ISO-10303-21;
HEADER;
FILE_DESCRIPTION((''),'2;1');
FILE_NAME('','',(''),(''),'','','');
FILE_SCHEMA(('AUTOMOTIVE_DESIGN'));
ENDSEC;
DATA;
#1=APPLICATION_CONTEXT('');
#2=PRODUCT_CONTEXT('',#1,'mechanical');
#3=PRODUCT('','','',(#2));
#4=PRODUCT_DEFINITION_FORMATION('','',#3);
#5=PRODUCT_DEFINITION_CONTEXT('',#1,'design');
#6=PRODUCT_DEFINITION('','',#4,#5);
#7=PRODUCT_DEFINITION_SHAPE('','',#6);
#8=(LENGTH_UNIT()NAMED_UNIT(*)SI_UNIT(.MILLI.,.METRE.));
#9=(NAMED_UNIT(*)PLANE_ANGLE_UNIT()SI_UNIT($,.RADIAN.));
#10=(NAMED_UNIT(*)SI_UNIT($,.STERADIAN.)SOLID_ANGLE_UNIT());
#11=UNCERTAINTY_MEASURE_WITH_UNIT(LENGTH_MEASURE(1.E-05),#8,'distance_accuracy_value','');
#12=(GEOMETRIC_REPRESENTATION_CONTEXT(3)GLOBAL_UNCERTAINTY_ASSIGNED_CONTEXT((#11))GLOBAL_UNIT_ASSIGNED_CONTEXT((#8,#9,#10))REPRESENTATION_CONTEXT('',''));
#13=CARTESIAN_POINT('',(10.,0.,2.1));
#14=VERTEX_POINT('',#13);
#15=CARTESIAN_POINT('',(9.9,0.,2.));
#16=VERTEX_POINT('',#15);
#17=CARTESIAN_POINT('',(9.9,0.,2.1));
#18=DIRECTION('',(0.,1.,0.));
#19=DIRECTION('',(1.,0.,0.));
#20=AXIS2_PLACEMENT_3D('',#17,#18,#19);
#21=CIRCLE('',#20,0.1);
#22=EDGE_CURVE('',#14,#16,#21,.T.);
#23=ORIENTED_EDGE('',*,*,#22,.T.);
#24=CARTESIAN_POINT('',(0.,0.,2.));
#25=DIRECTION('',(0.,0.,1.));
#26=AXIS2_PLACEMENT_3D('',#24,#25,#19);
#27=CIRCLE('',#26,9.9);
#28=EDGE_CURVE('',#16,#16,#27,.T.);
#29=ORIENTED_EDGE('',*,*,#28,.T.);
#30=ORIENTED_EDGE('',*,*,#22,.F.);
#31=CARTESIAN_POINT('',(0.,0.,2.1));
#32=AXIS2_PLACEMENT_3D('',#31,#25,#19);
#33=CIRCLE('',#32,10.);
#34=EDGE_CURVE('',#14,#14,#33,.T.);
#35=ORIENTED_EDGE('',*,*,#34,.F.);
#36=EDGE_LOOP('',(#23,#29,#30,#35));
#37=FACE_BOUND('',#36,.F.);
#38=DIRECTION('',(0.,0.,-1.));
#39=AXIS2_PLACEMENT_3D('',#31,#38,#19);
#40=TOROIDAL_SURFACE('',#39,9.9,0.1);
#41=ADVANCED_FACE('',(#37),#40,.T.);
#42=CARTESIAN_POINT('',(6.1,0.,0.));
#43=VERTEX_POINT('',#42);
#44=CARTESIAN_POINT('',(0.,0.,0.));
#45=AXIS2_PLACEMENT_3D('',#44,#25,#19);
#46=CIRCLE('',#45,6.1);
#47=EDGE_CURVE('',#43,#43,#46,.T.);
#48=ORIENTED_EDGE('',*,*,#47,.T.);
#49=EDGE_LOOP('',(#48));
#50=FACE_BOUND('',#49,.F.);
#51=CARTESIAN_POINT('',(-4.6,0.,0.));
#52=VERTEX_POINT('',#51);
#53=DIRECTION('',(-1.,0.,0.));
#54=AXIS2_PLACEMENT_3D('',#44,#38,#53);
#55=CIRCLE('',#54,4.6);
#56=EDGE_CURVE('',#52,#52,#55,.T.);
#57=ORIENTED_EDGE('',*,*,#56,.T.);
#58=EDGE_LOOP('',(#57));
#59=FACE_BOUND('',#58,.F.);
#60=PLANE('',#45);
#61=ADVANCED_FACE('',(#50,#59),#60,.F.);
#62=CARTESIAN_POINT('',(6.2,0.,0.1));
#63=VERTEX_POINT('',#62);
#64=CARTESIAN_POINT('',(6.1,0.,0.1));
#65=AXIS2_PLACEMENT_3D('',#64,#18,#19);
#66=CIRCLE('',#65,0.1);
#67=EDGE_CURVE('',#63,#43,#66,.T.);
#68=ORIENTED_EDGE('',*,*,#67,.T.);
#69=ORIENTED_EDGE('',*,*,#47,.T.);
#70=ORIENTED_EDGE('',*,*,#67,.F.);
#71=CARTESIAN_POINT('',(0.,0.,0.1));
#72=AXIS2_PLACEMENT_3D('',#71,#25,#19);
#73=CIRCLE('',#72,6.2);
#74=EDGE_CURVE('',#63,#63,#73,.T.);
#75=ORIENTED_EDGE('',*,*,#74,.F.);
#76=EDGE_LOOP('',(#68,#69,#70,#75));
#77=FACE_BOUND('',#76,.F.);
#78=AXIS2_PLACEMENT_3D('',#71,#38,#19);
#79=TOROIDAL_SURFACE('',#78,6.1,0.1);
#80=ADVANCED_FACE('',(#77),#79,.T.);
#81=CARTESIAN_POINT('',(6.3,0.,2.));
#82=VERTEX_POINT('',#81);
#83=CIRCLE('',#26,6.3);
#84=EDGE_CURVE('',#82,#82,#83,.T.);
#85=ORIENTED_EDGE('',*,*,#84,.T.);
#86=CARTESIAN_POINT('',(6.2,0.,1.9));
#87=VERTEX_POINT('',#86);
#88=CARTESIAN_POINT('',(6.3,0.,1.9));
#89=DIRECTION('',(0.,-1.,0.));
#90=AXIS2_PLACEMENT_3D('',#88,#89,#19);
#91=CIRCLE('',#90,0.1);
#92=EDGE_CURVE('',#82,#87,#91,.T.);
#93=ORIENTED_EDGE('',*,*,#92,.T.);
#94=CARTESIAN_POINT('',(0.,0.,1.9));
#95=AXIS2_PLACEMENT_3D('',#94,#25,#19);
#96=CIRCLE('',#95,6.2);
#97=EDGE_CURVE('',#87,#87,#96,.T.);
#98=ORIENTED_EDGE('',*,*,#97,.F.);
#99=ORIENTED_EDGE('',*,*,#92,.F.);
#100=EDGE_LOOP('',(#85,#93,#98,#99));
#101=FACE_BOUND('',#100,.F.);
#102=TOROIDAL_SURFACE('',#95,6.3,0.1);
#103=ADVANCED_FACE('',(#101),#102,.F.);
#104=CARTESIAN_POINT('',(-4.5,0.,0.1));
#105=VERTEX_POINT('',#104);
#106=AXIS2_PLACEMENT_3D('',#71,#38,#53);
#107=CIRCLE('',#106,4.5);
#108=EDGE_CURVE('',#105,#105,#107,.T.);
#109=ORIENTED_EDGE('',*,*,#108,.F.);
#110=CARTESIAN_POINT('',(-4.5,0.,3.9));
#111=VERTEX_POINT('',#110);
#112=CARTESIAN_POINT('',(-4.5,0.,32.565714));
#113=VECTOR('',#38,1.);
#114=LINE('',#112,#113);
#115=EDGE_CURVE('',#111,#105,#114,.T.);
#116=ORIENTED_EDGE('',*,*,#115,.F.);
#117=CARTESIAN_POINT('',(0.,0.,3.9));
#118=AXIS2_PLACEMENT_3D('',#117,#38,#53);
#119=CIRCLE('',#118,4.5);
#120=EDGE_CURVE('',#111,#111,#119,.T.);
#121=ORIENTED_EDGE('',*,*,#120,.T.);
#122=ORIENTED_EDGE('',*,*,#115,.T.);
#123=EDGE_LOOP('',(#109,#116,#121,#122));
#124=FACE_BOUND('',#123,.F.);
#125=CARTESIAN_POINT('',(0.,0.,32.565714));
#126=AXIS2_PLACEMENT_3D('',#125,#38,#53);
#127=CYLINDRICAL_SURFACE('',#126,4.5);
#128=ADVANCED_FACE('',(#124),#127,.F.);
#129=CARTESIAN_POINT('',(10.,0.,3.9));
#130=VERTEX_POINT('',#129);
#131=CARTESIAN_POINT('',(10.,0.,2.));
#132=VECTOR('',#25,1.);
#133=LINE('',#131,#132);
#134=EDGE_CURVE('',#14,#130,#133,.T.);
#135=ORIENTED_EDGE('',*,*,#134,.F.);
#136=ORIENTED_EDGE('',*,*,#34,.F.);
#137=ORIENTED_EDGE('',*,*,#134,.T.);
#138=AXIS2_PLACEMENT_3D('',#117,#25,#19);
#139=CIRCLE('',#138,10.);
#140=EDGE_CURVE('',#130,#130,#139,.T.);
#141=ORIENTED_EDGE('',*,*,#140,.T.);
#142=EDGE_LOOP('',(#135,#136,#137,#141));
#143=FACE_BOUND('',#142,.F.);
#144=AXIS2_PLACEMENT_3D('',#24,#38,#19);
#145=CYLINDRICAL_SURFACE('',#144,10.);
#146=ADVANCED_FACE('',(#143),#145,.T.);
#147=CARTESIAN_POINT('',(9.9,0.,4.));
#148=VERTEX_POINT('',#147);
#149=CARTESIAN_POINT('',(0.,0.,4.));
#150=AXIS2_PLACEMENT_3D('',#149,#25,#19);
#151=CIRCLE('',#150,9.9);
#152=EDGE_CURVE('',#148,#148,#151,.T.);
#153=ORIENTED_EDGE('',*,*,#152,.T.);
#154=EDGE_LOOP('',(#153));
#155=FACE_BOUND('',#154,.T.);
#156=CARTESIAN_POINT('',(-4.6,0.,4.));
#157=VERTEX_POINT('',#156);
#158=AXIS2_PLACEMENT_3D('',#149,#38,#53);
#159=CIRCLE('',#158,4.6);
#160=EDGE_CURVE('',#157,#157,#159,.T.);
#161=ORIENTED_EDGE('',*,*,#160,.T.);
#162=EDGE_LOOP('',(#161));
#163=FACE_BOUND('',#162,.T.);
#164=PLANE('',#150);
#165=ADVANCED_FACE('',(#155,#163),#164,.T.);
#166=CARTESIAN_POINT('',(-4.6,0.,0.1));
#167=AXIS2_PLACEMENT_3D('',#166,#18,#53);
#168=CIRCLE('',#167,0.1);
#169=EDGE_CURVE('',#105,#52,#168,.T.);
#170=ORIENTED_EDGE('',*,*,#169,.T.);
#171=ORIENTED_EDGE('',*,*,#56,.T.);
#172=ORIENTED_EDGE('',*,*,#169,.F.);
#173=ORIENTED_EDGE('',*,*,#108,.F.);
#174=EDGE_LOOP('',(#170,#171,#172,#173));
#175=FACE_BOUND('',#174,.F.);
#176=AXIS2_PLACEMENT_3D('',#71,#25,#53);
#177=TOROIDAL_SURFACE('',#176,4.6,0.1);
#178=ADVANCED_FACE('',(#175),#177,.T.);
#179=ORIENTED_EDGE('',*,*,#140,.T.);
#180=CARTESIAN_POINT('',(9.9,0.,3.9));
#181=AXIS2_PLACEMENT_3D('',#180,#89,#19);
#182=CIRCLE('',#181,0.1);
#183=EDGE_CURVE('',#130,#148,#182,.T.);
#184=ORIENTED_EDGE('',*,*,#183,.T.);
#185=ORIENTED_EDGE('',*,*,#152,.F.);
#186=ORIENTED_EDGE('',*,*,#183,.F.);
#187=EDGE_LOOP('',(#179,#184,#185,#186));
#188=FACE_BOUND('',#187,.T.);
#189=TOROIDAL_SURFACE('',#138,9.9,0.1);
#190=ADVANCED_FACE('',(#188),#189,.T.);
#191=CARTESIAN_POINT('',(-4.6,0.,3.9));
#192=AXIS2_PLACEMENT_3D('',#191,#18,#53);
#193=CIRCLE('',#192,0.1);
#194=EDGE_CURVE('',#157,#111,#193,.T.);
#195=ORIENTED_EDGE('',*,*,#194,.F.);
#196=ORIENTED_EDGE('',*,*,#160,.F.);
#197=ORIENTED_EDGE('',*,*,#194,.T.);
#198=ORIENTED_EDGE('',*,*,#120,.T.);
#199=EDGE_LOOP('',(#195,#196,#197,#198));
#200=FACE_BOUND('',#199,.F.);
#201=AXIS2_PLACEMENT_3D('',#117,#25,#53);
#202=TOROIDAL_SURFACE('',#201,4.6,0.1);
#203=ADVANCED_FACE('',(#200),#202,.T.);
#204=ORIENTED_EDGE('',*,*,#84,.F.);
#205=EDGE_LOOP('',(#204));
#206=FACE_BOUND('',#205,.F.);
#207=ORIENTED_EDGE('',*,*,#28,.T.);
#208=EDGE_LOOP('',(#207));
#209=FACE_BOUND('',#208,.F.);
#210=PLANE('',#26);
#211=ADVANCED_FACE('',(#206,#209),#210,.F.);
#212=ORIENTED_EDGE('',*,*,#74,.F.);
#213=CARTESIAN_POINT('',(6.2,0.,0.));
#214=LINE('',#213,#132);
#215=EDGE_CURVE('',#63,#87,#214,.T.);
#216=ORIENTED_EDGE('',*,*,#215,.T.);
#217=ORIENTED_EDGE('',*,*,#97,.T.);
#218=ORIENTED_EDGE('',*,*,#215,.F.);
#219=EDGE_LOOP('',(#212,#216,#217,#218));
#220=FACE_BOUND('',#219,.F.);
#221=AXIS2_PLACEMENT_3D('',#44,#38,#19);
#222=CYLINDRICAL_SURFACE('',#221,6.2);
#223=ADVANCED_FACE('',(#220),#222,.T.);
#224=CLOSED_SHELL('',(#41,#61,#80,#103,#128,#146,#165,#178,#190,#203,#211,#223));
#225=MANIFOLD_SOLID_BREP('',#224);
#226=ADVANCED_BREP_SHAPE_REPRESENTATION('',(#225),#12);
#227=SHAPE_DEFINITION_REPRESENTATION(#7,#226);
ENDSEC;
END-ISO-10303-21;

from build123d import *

# Parameters (mm, degrees)
F0_R     = 6.2
F1_DEPTH = 2
F2_R     = 10
F2_R_2   = 6.2
F3_DEPTH = 2
F5_D     = 9
F6_R     = 0.1


with BuildPart() as f1:
    # F0 (on Top) → F1 (new body)
    with BuildSketch(Plane.XY):
        Circle(F0_R)
    extrude(amount=F1_DEPTH)

    # F2 (on face) → F3 (join)
    with BuildSketch(Plane.XY.offset(2)):
        Circle(F2_R)
        Circle(F2_R_2, mode=Mode.SUBTRACT)
        Circle(F2_R_2)
    extrude(amount=F3_DEPTH)

    # F5 (through all)
    with Locations(Plane.XY.offset(4)):
        with Locations((0, 0)):
            Hole(F5_D / 2)

    # F6
    f6_edges = [f1.edges().sort_by_distance(p)[0] for p in [
        (-10, 0, 4),
        (-10, 0, 2),
        (-6.2, 0, 0),
        (-6.2, 0, 2),
        (-4.5, 0, 4),
        (-4.5, 0, 0),
    ]]
    fillet(f6_edges, radius=F6_R)


solid = f1.part
